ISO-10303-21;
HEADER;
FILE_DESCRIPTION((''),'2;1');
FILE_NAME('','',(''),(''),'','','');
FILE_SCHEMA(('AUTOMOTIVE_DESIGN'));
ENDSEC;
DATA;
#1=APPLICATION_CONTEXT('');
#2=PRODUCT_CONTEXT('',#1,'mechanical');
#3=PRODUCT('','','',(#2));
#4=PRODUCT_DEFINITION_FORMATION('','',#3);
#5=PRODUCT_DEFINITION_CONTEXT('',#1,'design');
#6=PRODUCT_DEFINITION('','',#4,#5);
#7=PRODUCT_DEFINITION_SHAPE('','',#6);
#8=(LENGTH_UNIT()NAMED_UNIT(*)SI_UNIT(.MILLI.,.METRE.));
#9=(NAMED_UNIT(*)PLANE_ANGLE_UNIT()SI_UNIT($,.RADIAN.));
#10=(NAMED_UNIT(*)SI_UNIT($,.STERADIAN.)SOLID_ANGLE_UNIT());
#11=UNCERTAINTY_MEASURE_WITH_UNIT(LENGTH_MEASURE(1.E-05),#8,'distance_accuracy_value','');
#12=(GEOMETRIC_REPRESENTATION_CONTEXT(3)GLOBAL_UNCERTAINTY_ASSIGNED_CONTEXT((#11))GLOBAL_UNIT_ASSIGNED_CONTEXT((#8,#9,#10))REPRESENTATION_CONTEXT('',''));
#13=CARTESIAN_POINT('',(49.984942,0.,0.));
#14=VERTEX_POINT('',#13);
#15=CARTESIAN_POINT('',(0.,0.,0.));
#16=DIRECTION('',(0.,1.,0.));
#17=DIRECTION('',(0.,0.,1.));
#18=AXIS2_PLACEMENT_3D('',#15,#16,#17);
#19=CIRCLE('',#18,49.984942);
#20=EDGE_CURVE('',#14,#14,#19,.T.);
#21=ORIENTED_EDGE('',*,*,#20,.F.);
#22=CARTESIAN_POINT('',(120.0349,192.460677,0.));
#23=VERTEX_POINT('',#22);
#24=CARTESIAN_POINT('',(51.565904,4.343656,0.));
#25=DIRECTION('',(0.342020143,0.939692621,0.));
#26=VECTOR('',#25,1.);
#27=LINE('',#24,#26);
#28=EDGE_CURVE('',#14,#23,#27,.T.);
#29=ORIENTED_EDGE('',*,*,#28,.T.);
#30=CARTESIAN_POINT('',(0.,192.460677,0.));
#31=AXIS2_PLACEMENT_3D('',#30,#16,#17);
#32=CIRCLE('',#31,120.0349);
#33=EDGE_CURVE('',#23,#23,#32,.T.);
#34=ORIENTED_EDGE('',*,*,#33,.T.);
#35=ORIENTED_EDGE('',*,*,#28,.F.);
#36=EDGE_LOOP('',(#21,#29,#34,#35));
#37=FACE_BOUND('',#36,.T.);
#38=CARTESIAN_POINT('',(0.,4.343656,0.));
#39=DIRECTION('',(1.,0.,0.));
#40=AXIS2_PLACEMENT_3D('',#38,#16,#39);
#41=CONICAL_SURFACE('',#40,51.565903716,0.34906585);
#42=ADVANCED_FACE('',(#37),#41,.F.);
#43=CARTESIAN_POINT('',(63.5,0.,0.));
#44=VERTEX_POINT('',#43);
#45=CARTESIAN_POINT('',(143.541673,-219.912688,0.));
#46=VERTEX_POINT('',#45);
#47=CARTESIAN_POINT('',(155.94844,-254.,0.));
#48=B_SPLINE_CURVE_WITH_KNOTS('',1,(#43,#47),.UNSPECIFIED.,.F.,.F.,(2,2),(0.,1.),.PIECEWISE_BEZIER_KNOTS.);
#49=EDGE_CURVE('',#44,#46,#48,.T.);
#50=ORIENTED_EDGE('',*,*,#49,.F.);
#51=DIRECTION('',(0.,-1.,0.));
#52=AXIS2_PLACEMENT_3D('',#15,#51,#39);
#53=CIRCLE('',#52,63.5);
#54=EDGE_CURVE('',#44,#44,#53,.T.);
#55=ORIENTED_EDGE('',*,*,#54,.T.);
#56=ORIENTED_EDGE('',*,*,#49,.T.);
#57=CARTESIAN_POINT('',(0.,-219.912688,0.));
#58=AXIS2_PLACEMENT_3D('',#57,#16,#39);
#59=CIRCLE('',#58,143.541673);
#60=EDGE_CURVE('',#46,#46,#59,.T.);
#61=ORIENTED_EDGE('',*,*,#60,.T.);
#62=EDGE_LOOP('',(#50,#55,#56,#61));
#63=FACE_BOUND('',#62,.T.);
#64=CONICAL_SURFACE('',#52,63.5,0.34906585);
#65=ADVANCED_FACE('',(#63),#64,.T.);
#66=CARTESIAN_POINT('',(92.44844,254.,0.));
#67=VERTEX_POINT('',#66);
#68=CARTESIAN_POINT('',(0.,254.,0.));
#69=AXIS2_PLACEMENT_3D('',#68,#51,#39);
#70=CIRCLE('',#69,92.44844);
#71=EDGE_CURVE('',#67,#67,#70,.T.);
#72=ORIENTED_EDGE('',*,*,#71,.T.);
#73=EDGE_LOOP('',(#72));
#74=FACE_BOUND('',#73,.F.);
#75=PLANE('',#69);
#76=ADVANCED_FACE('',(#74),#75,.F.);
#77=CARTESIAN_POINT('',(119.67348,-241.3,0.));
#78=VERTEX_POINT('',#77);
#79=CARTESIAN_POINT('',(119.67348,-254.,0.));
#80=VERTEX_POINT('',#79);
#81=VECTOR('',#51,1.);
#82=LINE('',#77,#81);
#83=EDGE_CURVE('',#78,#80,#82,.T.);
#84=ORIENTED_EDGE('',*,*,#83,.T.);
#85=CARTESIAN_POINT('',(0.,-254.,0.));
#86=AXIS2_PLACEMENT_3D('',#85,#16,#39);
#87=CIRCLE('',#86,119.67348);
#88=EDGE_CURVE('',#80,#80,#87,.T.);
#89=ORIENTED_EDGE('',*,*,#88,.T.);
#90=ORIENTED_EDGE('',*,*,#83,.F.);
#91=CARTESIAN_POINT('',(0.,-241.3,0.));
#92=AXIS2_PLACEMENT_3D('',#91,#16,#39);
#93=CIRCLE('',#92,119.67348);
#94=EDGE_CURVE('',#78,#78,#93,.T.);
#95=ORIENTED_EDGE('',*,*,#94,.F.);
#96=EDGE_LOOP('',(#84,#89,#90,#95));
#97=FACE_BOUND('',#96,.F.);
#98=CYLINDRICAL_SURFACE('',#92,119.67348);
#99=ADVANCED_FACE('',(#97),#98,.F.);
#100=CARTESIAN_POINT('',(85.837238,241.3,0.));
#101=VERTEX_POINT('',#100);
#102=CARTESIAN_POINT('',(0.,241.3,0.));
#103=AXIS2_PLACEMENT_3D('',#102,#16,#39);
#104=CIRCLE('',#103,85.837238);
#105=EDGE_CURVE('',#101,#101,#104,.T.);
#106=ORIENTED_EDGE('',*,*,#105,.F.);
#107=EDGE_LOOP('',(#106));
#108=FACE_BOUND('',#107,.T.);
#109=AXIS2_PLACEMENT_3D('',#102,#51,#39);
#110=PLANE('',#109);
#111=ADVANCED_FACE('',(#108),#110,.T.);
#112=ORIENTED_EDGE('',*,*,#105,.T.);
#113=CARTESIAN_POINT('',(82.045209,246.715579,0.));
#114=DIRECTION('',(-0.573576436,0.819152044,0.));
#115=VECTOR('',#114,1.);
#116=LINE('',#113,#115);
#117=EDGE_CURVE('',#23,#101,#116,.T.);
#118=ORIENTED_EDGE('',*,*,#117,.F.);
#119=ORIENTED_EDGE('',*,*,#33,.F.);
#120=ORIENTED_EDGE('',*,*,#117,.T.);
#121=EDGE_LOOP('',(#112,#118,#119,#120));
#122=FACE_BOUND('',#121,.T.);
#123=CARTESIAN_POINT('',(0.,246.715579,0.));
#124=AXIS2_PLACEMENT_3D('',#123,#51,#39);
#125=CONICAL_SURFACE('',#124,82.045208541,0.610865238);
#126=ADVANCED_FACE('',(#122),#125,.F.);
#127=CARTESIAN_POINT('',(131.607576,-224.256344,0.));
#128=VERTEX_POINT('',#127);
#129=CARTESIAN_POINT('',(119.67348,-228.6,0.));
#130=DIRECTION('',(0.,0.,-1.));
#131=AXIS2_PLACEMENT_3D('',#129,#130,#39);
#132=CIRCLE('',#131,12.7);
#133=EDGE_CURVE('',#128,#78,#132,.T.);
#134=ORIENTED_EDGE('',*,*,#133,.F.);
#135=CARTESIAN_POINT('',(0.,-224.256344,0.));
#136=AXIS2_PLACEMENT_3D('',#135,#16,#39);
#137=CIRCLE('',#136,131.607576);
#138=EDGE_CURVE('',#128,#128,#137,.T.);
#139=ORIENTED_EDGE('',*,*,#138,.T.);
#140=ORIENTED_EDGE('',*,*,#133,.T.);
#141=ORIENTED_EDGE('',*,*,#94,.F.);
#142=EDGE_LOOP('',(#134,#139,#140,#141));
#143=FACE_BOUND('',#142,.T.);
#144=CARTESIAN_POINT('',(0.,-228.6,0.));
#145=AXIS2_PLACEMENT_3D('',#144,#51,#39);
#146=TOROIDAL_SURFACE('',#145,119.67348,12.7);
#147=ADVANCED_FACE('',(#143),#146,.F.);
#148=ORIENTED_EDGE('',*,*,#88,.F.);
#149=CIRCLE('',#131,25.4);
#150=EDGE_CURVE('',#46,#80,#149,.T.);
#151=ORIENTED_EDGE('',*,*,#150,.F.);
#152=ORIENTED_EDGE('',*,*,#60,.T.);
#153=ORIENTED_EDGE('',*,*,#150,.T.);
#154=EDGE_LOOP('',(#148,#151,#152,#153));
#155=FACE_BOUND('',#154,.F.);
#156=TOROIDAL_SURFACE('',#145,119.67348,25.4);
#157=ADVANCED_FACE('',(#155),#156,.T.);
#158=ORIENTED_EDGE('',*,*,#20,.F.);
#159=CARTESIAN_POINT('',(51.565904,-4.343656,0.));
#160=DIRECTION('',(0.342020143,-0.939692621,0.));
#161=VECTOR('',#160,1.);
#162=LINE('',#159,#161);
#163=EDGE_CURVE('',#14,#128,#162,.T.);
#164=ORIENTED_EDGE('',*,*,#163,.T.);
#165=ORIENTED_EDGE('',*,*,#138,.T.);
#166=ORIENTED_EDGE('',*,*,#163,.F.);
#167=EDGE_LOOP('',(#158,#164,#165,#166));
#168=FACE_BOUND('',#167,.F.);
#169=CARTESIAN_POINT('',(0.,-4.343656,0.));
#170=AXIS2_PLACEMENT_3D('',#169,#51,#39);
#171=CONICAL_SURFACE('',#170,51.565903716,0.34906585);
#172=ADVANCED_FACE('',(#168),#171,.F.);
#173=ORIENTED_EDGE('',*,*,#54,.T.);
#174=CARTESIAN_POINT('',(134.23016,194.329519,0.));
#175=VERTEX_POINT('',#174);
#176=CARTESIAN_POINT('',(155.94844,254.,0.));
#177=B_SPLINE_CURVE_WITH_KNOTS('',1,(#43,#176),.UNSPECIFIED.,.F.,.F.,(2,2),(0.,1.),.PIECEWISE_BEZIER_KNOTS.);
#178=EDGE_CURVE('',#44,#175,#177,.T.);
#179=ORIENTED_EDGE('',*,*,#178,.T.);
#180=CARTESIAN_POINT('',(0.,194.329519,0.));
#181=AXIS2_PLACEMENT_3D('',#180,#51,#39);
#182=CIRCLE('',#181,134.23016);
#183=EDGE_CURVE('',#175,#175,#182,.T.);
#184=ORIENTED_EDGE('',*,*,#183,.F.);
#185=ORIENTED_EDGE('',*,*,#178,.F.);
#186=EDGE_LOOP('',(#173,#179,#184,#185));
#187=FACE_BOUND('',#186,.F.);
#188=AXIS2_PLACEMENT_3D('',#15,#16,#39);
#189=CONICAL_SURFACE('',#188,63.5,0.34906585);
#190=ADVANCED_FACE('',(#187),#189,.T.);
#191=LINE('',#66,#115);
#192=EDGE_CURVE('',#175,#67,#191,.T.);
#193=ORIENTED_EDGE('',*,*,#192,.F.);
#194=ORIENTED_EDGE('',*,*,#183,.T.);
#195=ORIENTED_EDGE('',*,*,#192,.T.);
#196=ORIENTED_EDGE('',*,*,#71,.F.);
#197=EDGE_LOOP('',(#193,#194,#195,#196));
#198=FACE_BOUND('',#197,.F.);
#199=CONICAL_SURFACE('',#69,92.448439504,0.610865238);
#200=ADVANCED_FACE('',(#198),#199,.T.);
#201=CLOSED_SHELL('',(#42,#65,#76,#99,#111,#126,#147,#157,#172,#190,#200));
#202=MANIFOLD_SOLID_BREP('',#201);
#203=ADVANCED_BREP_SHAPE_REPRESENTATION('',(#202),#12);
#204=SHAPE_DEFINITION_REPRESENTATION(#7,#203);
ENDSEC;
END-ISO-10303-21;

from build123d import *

# Parameters (mm, degrees)
F0_R          = 63.5
F1_DEPTH      = 254
F1_TAPER      = -20
F1_DEPTH_BACK = 254
F1_TAPER_BACK = -20
F2_R          = 25.4
F3_SIZE       = 63.5
F4_T          = -12.7


# Not quite as in the source:
# - a shell that OpenCascade refuses in one call is made with other operations: the cavity is built on its own and cut out


with BuildPart() as f1:
    # F0 (on Front) → F1 (new body, two sides)
    with BuildSketch(Plane.XZ) as f1_sk:
        Circle(F0_R)
    extrude(amount=F1_DEPTH, taper=F1_TAPER)
    extrude(f1_sk.sketch, amount=-F1_DEPTH_BACK, taper=F1_TAPER_BACK)

    # F2
    f2_edges = [f1.edges().sort_by_distance(p)[0] for p in [
        (-155.94844, -254, 0),
    ]]
    fillet(f2_edges, radius=F2_R)

    # F3
    f3_edges = [f1.edges().sort_by_distance(p)[0] for p in [
        (-155.94844, 254, 0),
    ]]
    chamfer(f3_edges, length=F3_SIZE)

    # F4: a shell. OpenCascade refuses it in one call, so the cavity is built on its own and cut out:
    # the body offset inwards by the wall thickness, plus a prism from it out through each open face.
    f4_core = offset(f1.part, amount=F4_T, kind=Kind.INTERSECTION, mode=Mode.PRIVATE)
    f4_exits = [f4_core.faces().sort_by_distance(p)[0] for p in [
        (0, -241.3, 0),
    ]]
    add(f4_core, mode=Mode.SUBTRACT)
    extrude(f4_exits, amount=-F4_T, mode=Mode.SUBTRACT)


solid = f1.part
